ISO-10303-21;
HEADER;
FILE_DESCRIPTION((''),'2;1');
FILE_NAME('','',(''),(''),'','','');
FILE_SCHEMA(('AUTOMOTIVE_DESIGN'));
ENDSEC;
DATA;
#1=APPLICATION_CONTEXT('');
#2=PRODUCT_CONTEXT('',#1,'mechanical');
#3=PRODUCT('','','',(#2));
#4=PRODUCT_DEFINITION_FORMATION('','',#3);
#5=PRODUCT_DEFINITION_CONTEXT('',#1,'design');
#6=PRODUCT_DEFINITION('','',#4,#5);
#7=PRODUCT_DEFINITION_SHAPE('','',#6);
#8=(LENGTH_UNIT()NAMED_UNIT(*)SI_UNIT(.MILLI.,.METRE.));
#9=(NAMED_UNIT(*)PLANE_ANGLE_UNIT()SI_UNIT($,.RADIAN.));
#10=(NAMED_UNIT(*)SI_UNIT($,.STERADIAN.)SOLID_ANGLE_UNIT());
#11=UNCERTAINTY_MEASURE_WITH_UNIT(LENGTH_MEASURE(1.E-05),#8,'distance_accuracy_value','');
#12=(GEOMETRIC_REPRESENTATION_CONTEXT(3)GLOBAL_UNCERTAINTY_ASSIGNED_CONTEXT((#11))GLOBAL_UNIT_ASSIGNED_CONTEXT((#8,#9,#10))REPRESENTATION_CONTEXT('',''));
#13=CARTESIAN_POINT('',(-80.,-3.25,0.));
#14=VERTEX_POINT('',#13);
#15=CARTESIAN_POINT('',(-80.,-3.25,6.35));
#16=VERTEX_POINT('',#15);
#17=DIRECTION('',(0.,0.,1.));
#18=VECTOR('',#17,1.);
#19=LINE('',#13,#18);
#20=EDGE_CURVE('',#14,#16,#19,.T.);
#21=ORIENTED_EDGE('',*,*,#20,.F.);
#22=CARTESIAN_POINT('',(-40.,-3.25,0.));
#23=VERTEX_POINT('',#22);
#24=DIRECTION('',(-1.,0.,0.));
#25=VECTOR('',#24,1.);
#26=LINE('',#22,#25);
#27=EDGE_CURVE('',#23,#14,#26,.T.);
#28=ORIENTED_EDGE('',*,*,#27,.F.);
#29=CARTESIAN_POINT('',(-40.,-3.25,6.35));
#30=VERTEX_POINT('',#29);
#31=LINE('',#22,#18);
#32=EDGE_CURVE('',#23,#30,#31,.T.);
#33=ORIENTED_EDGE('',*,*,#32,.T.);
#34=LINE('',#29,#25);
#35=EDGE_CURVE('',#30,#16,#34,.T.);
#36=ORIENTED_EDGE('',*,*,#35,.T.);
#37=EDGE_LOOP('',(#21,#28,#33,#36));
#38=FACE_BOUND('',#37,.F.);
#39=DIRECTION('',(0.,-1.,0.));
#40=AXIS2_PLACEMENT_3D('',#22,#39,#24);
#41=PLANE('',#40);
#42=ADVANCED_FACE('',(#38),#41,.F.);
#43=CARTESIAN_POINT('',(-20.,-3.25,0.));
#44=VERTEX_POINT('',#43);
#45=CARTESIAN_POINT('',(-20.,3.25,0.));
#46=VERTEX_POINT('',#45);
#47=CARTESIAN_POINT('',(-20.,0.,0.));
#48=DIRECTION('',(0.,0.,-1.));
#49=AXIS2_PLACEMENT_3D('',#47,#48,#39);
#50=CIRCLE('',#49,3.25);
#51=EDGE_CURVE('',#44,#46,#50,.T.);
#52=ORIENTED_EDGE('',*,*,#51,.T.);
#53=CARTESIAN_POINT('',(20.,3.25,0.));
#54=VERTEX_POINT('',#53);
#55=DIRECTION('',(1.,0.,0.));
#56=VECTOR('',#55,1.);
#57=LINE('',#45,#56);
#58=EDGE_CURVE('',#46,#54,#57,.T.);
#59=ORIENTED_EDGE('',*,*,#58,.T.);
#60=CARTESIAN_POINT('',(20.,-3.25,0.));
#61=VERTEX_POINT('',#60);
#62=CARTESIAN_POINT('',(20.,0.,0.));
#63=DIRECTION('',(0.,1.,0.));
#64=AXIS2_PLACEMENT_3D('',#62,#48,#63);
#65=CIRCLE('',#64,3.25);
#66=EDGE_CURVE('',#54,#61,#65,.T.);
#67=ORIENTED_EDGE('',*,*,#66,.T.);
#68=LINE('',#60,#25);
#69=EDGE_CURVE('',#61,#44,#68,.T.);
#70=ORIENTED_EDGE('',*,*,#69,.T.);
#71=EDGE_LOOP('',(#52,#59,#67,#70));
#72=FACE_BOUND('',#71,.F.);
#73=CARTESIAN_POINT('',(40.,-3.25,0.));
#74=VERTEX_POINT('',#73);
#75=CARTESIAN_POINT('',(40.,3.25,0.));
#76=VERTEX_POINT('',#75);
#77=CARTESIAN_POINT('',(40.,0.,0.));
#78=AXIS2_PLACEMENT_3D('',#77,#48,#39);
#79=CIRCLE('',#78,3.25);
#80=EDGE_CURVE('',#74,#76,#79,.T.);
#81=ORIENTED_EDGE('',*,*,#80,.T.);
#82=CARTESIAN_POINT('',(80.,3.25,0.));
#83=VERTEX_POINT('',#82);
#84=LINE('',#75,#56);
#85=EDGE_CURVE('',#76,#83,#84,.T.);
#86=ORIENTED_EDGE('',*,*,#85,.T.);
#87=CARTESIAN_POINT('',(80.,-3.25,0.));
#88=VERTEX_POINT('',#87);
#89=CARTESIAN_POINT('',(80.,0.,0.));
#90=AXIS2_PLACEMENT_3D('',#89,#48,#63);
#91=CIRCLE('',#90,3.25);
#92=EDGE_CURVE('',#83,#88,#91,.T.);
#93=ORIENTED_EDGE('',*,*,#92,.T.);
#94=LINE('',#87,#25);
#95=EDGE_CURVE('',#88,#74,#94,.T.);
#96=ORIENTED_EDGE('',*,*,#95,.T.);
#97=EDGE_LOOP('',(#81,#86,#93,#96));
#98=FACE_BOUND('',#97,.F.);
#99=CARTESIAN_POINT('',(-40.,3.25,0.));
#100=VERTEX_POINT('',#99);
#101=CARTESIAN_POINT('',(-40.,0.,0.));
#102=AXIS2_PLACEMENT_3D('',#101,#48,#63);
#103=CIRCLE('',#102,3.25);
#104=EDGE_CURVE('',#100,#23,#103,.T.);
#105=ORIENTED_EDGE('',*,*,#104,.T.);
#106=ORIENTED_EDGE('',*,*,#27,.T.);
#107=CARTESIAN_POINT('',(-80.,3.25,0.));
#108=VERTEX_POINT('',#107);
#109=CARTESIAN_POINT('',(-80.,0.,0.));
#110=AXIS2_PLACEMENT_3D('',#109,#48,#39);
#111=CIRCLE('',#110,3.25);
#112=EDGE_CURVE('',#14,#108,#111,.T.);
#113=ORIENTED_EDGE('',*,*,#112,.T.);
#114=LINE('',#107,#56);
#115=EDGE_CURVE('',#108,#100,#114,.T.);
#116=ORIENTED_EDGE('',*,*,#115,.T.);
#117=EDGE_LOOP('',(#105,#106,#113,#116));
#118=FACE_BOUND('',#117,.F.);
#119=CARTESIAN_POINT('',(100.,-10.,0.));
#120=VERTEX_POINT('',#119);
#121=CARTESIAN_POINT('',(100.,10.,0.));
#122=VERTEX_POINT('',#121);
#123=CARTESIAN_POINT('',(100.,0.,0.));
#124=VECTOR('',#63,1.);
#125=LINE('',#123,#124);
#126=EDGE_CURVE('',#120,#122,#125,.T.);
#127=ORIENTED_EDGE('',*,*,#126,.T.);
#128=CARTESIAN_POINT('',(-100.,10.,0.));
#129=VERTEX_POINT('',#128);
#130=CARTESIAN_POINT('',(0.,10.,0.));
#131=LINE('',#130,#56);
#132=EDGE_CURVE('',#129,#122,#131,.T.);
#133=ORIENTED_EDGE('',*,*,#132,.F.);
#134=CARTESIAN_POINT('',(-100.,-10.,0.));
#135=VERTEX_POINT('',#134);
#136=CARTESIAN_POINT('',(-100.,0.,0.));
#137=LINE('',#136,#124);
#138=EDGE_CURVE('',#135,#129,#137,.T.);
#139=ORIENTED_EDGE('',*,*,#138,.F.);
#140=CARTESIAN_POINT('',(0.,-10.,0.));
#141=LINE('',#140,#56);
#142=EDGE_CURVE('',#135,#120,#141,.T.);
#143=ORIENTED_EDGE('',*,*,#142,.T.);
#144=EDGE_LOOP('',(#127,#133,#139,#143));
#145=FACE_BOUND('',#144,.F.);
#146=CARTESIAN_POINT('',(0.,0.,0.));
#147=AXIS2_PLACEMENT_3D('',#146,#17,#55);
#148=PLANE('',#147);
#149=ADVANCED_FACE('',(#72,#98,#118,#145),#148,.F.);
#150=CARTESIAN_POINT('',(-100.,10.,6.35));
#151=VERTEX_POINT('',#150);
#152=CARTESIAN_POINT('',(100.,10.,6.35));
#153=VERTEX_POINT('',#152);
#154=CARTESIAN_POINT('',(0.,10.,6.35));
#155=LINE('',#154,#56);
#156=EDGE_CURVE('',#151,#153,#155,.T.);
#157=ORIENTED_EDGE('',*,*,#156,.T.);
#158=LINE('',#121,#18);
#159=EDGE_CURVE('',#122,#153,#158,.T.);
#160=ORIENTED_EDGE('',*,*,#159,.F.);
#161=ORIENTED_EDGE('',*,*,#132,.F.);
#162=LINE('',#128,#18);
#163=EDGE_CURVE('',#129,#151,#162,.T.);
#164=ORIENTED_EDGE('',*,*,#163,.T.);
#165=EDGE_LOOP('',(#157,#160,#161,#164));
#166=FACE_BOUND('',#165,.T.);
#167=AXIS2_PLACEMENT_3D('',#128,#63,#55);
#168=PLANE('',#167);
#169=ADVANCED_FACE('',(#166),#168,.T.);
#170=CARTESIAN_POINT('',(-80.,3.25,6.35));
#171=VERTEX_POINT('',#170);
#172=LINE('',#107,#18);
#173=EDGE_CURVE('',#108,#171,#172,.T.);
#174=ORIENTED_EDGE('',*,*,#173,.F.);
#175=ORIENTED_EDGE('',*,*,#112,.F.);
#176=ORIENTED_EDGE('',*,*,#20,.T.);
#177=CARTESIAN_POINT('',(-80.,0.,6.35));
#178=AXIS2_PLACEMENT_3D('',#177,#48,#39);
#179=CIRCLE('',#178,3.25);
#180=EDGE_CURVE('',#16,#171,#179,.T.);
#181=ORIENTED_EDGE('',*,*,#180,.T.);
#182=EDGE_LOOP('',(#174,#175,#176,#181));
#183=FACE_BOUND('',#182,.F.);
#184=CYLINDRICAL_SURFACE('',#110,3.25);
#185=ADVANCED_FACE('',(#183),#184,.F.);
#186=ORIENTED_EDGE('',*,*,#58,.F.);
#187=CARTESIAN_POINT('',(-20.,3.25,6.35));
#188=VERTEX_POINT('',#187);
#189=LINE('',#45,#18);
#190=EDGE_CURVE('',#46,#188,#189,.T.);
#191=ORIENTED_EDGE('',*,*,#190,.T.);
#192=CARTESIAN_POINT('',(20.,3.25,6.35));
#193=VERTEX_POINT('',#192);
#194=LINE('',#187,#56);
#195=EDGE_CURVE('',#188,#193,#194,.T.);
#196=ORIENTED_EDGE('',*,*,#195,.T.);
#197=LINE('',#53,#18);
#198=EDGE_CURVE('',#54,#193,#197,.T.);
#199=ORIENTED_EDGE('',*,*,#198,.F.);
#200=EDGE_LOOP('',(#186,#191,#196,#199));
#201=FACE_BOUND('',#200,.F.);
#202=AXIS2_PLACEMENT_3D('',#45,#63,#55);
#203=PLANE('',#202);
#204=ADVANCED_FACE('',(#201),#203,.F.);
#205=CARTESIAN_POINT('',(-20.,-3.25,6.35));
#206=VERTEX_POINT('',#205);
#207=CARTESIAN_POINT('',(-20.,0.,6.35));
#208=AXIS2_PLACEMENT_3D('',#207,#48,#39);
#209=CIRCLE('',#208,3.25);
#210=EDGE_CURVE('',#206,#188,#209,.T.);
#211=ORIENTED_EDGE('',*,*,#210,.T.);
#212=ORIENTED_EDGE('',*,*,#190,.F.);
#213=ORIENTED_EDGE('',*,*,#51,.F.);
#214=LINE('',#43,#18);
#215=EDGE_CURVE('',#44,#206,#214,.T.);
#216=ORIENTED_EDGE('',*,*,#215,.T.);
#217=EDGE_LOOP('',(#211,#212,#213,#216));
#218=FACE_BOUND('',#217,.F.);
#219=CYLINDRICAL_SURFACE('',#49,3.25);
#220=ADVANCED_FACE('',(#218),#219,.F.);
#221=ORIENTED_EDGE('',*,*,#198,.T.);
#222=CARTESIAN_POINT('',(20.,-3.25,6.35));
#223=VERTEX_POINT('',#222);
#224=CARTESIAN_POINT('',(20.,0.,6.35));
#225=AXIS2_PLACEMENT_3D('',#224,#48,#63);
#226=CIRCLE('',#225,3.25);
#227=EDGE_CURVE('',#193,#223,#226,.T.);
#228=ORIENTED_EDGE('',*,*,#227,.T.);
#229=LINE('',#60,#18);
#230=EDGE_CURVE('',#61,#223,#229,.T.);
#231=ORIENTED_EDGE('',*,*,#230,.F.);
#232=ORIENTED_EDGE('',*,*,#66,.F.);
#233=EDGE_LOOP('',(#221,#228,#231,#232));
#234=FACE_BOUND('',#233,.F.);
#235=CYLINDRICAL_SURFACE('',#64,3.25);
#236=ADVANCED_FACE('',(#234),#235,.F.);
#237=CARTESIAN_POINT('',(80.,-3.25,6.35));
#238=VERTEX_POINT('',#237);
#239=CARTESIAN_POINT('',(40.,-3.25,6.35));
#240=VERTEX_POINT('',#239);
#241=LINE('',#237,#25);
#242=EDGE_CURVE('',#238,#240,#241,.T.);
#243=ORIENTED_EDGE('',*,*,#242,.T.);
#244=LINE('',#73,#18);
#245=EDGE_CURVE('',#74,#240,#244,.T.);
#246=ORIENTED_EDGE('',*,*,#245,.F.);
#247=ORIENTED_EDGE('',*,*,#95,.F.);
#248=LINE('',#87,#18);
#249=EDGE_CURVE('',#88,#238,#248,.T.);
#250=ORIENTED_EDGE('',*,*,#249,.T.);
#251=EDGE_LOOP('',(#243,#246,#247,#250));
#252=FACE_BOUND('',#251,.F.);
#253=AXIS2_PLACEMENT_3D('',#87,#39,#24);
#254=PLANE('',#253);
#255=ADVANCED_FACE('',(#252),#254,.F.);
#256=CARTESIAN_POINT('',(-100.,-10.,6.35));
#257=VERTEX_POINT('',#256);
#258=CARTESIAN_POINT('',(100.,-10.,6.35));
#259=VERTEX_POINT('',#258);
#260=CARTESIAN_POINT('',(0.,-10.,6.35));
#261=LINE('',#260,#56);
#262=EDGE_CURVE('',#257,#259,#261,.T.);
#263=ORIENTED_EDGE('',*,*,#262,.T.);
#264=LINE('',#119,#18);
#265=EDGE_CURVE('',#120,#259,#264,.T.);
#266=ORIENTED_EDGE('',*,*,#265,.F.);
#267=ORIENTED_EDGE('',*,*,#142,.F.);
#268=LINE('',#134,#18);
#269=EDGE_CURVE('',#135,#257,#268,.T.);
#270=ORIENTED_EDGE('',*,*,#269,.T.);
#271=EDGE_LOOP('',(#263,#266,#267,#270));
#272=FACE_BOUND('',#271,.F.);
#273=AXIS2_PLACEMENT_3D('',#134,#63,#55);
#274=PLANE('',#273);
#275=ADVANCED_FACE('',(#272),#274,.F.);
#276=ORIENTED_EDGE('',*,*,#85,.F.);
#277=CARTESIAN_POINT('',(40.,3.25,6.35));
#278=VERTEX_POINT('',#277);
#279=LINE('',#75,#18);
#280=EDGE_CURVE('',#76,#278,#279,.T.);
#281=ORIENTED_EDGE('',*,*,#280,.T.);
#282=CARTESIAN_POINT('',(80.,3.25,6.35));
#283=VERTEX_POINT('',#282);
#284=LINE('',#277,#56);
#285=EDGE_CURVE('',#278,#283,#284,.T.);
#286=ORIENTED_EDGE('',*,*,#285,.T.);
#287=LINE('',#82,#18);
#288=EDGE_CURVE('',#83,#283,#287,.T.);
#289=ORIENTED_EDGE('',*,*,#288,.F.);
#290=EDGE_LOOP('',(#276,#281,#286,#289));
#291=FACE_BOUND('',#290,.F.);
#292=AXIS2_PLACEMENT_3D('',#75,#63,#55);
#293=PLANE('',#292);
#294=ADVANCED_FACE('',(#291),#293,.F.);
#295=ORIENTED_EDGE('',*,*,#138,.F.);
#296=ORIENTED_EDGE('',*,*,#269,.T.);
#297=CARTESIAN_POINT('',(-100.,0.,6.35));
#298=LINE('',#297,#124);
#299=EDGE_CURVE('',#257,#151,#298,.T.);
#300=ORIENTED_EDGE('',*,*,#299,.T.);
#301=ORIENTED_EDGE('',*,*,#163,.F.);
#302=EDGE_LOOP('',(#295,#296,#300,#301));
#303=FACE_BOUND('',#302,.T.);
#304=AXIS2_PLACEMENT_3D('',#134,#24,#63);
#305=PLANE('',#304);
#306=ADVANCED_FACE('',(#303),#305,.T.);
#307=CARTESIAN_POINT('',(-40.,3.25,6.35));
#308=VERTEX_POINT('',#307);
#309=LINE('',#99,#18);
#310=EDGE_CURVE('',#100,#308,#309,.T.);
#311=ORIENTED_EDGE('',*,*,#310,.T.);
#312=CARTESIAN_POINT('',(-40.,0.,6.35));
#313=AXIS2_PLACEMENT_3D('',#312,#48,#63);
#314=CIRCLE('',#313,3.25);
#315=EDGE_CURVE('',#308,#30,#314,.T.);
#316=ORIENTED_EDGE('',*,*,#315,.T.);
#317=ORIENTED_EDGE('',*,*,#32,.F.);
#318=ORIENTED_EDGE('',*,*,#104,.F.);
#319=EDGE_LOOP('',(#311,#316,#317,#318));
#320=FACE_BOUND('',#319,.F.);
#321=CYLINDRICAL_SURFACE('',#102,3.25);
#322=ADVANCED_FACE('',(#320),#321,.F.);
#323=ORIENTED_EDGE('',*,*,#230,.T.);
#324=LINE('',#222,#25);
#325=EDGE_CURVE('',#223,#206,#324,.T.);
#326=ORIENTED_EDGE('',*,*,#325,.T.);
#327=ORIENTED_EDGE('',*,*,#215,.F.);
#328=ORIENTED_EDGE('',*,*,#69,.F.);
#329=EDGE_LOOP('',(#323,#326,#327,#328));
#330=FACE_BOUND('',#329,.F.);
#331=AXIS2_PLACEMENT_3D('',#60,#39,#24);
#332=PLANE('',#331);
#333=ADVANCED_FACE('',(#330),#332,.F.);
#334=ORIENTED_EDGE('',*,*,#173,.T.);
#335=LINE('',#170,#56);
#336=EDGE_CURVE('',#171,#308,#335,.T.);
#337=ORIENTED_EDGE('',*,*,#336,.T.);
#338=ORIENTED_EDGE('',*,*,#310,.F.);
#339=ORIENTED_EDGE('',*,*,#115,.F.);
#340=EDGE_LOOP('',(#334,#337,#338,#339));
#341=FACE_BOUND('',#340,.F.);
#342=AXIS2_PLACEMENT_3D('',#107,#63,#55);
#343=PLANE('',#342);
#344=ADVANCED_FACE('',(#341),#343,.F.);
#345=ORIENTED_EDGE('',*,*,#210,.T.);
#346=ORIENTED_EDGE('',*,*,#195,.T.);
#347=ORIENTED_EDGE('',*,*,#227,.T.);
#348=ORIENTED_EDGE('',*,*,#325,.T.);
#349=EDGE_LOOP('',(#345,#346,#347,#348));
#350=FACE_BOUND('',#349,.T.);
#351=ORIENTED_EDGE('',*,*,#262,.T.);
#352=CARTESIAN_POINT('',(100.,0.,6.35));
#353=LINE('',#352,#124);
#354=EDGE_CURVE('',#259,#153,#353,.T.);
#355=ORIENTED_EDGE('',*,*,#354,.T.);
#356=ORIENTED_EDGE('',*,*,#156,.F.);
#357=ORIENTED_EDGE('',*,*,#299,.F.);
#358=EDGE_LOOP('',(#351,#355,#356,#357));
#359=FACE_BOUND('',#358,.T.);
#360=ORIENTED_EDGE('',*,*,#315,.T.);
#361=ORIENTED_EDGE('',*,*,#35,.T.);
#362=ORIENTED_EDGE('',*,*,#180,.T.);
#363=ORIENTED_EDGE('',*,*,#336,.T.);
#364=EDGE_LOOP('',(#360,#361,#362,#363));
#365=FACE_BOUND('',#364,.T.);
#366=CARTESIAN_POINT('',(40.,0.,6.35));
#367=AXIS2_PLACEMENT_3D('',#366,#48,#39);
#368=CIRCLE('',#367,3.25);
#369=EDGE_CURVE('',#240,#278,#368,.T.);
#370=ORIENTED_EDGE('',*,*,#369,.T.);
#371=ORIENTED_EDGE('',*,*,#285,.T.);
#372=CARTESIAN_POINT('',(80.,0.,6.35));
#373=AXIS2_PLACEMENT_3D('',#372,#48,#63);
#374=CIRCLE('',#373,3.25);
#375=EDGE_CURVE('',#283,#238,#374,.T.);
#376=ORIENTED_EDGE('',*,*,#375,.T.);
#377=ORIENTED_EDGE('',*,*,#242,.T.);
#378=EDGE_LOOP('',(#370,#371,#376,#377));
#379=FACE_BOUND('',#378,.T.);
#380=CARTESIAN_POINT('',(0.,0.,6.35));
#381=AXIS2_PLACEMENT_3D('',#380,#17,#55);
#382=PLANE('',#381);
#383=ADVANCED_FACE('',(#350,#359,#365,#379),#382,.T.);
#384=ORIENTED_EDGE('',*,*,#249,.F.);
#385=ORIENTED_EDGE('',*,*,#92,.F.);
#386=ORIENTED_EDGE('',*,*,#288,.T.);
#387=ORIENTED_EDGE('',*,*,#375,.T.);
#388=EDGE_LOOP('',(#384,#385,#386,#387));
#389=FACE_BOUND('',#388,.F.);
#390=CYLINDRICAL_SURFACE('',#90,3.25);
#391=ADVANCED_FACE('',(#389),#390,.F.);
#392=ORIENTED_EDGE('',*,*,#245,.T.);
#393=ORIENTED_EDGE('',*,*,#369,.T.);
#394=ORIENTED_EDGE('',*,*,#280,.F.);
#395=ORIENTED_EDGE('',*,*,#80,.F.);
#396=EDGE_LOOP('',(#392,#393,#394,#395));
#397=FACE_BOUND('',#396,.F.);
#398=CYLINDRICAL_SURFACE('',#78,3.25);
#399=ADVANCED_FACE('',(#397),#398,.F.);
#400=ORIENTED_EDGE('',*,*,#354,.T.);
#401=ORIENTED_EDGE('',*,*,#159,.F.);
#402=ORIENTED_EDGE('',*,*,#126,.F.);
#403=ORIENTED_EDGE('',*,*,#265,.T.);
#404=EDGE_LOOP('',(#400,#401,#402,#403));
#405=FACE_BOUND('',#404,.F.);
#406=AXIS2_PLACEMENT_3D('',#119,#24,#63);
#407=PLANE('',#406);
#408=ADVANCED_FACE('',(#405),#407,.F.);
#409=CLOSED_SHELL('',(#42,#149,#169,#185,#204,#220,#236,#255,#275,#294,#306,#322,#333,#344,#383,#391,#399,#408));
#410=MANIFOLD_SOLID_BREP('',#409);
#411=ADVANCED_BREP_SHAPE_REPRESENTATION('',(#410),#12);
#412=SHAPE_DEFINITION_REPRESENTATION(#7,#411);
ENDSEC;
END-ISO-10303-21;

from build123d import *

# Parameters (mm, degrees)
F0_W     = 200
F0_H     = 20
F1_DEPTH = 6.35


# Not quite as in the source:
# - a length typed as a fraction of an inch, garbled in the dataset ("3 / 203.2 mm" for 3/8 in), is restored


with BuildPart() as f1:
    # F0 (on Top) → F1 (new body)
    with BuildSketch(Plane.XY):
        Rectangle(F0_W, F0_H)
        with BuildLine():
            Line((-80, 3.25), (-40, 3.25))
            ThreePointArc((-40, 3.25), (-36.75, 0), (-40, -3.25))
            Line((-40, -3.25), (-80, -3.25))
            ThreePointArc((-80, -3.25), (-83.25, 0), (-80, 3.25))
        make_face(mode=Mode.SUBTRACT)
        with BuildLine():
            Line((-20, 3.25), (20, 3.25))
            ThreePointArc((20, 3.25), (23.25, 0), (20, -3.25))
            Line((20, -3.25), (-20, -3.25))
            ThreePointArc((-20, -3.25), (-23.25, 0), (-20, 3.25))
        make_face(mode=Mode.SUBTRACT)
        with BuildLine():
            Line((80, -3.25), (40, -3.25))
            ThreePointArc((40, -3.25), (36.75, 0), (40, 3.25))
            Line((40, 3.25), (80, 3.25))
            ThreePointArc((80, 3.25), (83.25, 0), (80, -3.25))
        make_face(mode=Mode.SUBTRACT)
    extrude(amount=F1_DEPTH)


solid = f1.part
